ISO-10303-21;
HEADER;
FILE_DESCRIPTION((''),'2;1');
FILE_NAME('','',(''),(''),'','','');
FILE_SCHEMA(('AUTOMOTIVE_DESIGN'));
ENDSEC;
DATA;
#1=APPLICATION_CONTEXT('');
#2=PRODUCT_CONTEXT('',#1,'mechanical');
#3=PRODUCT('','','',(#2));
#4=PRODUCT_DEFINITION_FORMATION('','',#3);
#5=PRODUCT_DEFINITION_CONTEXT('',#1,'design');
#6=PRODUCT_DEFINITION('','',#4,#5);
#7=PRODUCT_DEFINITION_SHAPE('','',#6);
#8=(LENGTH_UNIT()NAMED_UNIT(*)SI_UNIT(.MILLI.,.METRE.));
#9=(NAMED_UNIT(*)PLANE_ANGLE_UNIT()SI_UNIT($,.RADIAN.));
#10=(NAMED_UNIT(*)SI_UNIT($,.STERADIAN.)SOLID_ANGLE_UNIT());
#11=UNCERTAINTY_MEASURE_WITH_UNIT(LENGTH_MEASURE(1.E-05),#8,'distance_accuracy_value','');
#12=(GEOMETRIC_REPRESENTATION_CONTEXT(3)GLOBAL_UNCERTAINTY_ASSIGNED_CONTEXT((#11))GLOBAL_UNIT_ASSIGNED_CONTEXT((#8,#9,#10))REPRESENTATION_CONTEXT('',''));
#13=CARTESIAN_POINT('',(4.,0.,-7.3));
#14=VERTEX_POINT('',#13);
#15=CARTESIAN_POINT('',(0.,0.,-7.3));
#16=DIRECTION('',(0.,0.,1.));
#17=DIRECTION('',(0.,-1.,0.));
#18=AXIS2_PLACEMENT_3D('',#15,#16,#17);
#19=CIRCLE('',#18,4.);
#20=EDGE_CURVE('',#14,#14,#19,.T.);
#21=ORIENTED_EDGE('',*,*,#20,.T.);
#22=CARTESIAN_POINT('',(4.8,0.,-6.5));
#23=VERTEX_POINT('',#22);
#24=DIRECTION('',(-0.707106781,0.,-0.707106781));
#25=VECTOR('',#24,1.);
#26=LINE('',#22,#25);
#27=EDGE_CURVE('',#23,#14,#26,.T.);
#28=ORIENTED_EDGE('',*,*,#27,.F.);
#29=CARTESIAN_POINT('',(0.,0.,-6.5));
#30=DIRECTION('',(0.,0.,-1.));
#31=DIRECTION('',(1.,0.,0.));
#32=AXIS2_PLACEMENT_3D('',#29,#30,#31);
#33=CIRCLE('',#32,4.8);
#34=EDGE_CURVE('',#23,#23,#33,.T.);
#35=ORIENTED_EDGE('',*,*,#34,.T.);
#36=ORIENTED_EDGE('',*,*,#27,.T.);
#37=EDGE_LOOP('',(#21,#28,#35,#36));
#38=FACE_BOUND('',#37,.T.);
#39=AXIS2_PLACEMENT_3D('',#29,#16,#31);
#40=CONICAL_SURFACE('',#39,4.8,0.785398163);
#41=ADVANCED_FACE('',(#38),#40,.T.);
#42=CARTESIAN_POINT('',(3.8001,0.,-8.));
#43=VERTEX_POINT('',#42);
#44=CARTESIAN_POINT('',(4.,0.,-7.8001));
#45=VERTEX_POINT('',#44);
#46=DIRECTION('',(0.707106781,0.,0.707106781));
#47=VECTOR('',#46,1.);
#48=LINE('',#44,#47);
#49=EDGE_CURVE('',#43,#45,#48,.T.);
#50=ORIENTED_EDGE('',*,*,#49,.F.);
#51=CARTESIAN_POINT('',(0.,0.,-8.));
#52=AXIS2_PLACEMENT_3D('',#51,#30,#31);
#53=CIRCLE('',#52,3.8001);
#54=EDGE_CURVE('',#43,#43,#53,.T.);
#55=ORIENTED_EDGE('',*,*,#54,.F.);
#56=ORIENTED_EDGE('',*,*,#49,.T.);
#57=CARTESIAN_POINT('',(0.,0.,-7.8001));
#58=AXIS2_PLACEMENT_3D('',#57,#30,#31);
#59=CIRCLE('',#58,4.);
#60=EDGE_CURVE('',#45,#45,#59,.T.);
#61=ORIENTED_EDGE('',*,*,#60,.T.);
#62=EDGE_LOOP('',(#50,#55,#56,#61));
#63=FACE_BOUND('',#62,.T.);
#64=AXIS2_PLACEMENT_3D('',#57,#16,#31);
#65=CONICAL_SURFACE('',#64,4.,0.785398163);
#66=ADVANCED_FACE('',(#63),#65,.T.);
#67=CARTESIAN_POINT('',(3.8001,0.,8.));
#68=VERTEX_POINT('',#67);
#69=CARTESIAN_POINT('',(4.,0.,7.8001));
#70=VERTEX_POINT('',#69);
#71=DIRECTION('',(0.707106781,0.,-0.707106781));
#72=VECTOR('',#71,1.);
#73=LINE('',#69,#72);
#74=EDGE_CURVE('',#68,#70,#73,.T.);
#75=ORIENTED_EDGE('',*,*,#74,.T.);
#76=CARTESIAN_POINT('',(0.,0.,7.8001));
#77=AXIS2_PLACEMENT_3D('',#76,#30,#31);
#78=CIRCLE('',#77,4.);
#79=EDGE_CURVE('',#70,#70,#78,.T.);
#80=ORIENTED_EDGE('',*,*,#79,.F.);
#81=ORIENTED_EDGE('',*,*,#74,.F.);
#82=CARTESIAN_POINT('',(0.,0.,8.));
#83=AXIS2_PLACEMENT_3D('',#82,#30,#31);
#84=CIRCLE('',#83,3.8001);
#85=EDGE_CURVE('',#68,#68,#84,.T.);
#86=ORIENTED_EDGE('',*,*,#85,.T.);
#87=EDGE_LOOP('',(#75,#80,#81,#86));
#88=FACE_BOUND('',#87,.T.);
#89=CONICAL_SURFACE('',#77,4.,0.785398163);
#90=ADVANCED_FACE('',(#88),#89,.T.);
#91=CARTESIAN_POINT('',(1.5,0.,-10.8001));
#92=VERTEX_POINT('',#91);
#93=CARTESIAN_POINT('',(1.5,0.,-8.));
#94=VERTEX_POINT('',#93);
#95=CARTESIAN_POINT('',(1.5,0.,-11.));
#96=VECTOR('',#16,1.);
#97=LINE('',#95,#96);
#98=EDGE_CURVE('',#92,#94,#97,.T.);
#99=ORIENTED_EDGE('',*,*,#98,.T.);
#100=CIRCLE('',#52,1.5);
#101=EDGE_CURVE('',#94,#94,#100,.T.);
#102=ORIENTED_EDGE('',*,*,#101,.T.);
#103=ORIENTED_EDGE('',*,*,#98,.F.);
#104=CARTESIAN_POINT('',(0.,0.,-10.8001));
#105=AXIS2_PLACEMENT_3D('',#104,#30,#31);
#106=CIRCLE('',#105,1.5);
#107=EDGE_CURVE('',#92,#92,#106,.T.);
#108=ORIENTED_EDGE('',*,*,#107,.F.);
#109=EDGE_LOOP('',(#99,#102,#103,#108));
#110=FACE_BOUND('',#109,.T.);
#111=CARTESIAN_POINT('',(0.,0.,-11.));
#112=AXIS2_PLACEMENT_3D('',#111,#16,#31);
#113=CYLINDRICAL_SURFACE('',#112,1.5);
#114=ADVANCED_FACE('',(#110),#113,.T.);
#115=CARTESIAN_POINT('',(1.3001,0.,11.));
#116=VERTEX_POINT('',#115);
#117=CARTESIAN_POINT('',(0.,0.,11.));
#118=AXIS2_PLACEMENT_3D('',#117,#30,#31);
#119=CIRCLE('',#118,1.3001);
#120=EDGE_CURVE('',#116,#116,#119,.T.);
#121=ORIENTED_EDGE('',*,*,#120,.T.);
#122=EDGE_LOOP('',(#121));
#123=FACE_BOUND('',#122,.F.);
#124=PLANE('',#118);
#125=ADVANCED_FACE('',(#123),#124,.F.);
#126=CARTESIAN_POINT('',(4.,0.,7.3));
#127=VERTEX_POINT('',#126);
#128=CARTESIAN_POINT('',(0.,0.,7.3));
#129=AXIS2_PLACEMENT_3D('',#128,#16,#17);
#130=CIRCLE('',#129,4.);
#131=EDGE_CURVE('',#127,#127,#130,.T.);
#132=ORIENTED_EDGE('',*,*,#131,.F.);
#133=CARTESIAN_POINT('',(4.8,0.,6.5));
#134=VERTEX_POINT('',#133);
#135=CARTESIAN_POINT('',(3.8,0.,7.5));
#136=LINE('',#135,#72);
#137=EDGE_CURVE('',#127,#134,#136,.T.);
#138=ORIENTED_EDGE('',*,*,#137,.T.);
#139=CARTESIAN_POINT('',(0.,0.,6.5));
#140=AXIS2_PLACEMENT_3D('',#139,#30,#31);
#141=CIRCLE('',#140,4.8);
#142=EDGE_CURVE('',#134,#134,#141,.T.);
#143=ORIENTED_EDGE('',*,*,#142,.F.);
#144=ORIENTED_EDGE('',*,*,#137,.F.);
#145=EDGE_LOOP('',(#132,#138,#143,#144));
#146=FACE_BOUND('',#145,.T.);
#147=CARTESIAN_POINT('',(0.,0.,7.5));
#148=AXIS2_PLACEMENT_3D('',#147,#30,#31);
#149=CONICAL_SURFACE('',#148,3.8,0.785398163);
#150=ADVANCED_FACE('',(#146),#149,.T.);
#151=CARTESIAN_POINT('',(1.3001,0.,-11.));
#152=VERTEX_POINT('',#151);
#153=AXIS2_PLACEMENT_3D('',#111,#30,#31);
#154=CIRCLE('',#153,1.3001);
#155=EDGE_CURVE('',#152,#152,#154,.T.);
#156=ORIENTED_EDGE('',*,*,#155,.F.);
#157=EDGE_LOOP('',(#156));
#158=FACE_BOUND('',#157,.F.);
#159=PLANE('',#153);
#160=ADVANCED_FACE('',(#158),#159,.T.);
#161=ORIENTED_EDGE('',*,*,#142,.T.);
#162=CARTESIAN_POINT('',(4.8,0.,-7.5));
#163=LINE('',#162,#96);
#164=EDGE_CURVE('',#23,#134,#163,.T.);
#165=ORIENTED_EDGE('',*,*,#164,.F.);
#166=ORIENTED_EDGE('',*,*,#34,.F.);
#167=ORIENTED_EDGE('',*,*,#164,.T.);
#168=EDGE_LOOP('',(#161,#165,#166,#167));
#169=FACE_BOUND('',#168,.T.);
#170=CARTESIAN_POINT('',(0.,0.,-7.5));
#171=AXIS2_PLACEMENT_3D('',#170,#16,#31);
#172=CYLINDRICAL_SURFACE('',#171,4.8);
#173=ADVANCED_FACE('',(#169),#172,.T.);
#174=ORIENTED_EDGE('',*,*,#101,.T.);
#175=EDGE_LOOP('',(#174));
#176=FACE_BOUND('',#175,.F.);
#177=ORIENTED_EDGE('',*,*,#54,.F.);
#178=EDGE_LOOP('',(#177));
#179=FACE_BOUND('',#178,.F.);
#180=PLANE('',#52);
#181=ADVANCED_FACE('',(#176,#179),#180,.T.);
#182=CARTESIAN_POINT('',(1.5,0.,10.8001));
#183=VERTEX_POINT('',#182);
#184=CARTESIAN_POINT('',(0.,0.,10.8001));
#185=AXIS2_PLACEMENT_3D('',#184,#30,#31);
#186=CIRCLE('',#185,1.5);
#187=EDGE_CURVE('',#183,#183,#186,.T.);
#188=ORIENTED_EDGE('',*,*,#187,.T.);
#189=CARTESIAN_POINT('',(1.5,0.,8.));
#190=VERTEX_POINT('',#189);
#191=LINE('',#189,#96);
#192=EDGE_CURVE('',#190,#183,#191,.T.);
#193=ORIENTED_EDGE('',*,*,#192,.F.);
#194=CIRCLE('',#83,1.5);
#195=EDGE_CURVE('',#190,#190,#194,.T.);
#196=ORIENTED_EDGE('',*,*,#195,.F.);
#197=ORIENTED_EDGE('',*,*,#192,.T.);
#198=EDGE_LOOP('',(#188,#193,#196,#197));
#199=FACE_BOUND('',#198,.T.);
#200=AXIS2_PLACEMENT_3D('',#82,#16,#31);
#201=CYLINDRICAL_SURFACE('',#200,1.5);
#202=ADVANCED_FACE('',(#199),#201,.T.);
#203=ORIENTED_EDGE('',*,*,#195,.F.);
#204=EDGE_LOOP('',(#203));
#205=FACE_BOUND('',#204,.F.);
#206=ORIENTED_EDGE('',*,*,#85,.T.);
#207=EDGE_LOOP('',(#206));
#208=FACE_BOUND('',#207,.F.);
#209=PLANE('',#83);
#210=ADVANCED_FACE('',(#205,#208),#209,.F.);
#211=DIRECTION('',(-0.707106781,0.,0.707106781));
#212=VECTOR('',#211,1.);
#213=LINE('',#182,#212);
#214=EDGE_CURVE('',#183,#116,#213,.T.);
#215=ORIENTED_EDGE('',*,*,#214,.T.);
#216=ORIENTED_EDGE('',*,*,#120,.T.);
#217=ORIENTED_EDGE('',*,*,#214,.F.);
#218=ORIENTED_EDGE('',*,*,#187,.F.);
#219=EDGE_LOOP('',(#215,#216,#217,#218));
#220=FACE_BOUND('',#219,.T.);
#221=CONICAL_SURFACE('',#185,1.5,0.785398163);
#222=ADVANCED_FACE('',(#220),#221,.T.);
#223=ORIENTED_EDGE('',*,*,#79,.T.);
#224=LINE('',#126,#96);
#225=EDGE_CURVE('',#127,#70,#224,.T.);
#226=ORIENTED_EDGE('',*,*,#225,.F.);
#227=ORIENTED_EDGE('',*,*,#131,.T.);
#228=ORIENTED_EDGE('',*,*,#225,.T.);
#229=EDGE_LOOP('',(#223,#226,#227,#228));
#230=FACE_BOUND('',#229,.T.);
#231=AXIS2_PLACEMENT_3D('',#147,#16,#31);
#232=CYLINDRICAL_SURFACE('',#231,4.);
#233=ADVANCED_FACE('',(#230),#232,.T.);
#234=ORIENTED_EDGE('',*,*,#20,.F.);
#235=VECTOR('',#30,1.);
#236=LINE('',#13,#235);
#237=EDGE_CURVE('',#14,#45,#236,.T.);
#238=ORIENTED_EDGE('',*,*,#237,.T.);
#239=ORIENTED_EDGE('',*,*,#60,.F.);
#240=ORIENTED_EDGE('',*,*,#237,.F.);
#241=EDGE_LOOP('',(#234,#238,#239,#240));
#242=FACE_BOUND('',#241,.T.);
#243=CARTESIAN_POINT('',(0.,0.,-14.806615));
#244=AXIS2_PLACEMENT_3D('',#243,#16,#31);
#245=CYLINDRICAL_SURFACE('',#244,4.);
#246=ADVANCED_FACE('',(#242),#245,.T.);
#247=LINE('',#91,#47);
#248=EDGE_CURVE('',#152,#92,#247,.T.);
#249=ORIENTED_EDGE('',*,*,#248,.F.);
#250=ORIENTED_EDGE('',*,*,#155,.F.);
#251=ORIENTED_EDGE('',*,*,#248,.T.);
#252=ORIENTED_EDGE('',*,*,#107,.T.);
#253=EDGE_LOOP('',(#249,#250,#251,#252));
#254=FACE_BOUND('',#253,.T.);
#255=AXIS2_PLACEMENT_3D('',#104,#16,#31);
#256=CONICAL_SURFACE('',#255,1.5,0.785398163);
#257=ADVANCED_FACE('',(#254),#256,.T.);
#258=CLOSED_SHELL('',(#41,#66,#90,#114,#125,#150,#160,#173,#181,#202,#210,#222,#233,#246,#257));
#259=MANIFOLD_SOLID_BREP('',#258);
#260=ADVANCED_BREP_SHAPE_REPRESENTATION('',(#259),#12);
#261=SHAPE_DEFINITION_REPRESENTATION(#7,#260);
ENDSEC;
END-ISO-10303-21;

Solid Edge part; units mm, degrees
sketch "Sketch1" plane through (0, 0, 0) normal (0, -1, 0) x (1, 0, 0)
  line L0 (4, 8) -> (1.5, 8)
  line L1 (1.5, 8) -> (1.5, 11)
  line L2 (1.5, 11) -> (0, 11)
  line L3 (0, 11) -> (0, -11)
  line L4 (0, -11) -> (1.5, -11)
  line L5 (1.5, -11) -> (1.5, -8)
  line L6 (1.5, -8) -> (4, -8)
  line L7 (4, -8) -> (4, -7.5)
  line L8 (4, -7.5) -> (4.8, -7.5)
  line L9 (4.8, -7.5) -> (4.8, 7.5)
  line L10 (4.8, 7.5) -> (4, 7.5)
  line L11 (4, 7.5) -> (4, 8)
revolve "RevolvedProtrusion1" add sketch "Sketch1" angle 360 about axis through (0, 0, 11) along (0, 0, -1)
chamfer "Chaflán_2" distance 0.2 angle 45 4 edges at (-1.5, 0, -11) (-1.5, 0, 11) (-4, 0, 8) (-4, 0, -8)
chamfer "Chaflán_3" distance 1 angle 45 2 edges at (-4.8, 0, -7.5) (-4.8, 0, 7.5)
chamfer "Chamfer1" [suppressed]
